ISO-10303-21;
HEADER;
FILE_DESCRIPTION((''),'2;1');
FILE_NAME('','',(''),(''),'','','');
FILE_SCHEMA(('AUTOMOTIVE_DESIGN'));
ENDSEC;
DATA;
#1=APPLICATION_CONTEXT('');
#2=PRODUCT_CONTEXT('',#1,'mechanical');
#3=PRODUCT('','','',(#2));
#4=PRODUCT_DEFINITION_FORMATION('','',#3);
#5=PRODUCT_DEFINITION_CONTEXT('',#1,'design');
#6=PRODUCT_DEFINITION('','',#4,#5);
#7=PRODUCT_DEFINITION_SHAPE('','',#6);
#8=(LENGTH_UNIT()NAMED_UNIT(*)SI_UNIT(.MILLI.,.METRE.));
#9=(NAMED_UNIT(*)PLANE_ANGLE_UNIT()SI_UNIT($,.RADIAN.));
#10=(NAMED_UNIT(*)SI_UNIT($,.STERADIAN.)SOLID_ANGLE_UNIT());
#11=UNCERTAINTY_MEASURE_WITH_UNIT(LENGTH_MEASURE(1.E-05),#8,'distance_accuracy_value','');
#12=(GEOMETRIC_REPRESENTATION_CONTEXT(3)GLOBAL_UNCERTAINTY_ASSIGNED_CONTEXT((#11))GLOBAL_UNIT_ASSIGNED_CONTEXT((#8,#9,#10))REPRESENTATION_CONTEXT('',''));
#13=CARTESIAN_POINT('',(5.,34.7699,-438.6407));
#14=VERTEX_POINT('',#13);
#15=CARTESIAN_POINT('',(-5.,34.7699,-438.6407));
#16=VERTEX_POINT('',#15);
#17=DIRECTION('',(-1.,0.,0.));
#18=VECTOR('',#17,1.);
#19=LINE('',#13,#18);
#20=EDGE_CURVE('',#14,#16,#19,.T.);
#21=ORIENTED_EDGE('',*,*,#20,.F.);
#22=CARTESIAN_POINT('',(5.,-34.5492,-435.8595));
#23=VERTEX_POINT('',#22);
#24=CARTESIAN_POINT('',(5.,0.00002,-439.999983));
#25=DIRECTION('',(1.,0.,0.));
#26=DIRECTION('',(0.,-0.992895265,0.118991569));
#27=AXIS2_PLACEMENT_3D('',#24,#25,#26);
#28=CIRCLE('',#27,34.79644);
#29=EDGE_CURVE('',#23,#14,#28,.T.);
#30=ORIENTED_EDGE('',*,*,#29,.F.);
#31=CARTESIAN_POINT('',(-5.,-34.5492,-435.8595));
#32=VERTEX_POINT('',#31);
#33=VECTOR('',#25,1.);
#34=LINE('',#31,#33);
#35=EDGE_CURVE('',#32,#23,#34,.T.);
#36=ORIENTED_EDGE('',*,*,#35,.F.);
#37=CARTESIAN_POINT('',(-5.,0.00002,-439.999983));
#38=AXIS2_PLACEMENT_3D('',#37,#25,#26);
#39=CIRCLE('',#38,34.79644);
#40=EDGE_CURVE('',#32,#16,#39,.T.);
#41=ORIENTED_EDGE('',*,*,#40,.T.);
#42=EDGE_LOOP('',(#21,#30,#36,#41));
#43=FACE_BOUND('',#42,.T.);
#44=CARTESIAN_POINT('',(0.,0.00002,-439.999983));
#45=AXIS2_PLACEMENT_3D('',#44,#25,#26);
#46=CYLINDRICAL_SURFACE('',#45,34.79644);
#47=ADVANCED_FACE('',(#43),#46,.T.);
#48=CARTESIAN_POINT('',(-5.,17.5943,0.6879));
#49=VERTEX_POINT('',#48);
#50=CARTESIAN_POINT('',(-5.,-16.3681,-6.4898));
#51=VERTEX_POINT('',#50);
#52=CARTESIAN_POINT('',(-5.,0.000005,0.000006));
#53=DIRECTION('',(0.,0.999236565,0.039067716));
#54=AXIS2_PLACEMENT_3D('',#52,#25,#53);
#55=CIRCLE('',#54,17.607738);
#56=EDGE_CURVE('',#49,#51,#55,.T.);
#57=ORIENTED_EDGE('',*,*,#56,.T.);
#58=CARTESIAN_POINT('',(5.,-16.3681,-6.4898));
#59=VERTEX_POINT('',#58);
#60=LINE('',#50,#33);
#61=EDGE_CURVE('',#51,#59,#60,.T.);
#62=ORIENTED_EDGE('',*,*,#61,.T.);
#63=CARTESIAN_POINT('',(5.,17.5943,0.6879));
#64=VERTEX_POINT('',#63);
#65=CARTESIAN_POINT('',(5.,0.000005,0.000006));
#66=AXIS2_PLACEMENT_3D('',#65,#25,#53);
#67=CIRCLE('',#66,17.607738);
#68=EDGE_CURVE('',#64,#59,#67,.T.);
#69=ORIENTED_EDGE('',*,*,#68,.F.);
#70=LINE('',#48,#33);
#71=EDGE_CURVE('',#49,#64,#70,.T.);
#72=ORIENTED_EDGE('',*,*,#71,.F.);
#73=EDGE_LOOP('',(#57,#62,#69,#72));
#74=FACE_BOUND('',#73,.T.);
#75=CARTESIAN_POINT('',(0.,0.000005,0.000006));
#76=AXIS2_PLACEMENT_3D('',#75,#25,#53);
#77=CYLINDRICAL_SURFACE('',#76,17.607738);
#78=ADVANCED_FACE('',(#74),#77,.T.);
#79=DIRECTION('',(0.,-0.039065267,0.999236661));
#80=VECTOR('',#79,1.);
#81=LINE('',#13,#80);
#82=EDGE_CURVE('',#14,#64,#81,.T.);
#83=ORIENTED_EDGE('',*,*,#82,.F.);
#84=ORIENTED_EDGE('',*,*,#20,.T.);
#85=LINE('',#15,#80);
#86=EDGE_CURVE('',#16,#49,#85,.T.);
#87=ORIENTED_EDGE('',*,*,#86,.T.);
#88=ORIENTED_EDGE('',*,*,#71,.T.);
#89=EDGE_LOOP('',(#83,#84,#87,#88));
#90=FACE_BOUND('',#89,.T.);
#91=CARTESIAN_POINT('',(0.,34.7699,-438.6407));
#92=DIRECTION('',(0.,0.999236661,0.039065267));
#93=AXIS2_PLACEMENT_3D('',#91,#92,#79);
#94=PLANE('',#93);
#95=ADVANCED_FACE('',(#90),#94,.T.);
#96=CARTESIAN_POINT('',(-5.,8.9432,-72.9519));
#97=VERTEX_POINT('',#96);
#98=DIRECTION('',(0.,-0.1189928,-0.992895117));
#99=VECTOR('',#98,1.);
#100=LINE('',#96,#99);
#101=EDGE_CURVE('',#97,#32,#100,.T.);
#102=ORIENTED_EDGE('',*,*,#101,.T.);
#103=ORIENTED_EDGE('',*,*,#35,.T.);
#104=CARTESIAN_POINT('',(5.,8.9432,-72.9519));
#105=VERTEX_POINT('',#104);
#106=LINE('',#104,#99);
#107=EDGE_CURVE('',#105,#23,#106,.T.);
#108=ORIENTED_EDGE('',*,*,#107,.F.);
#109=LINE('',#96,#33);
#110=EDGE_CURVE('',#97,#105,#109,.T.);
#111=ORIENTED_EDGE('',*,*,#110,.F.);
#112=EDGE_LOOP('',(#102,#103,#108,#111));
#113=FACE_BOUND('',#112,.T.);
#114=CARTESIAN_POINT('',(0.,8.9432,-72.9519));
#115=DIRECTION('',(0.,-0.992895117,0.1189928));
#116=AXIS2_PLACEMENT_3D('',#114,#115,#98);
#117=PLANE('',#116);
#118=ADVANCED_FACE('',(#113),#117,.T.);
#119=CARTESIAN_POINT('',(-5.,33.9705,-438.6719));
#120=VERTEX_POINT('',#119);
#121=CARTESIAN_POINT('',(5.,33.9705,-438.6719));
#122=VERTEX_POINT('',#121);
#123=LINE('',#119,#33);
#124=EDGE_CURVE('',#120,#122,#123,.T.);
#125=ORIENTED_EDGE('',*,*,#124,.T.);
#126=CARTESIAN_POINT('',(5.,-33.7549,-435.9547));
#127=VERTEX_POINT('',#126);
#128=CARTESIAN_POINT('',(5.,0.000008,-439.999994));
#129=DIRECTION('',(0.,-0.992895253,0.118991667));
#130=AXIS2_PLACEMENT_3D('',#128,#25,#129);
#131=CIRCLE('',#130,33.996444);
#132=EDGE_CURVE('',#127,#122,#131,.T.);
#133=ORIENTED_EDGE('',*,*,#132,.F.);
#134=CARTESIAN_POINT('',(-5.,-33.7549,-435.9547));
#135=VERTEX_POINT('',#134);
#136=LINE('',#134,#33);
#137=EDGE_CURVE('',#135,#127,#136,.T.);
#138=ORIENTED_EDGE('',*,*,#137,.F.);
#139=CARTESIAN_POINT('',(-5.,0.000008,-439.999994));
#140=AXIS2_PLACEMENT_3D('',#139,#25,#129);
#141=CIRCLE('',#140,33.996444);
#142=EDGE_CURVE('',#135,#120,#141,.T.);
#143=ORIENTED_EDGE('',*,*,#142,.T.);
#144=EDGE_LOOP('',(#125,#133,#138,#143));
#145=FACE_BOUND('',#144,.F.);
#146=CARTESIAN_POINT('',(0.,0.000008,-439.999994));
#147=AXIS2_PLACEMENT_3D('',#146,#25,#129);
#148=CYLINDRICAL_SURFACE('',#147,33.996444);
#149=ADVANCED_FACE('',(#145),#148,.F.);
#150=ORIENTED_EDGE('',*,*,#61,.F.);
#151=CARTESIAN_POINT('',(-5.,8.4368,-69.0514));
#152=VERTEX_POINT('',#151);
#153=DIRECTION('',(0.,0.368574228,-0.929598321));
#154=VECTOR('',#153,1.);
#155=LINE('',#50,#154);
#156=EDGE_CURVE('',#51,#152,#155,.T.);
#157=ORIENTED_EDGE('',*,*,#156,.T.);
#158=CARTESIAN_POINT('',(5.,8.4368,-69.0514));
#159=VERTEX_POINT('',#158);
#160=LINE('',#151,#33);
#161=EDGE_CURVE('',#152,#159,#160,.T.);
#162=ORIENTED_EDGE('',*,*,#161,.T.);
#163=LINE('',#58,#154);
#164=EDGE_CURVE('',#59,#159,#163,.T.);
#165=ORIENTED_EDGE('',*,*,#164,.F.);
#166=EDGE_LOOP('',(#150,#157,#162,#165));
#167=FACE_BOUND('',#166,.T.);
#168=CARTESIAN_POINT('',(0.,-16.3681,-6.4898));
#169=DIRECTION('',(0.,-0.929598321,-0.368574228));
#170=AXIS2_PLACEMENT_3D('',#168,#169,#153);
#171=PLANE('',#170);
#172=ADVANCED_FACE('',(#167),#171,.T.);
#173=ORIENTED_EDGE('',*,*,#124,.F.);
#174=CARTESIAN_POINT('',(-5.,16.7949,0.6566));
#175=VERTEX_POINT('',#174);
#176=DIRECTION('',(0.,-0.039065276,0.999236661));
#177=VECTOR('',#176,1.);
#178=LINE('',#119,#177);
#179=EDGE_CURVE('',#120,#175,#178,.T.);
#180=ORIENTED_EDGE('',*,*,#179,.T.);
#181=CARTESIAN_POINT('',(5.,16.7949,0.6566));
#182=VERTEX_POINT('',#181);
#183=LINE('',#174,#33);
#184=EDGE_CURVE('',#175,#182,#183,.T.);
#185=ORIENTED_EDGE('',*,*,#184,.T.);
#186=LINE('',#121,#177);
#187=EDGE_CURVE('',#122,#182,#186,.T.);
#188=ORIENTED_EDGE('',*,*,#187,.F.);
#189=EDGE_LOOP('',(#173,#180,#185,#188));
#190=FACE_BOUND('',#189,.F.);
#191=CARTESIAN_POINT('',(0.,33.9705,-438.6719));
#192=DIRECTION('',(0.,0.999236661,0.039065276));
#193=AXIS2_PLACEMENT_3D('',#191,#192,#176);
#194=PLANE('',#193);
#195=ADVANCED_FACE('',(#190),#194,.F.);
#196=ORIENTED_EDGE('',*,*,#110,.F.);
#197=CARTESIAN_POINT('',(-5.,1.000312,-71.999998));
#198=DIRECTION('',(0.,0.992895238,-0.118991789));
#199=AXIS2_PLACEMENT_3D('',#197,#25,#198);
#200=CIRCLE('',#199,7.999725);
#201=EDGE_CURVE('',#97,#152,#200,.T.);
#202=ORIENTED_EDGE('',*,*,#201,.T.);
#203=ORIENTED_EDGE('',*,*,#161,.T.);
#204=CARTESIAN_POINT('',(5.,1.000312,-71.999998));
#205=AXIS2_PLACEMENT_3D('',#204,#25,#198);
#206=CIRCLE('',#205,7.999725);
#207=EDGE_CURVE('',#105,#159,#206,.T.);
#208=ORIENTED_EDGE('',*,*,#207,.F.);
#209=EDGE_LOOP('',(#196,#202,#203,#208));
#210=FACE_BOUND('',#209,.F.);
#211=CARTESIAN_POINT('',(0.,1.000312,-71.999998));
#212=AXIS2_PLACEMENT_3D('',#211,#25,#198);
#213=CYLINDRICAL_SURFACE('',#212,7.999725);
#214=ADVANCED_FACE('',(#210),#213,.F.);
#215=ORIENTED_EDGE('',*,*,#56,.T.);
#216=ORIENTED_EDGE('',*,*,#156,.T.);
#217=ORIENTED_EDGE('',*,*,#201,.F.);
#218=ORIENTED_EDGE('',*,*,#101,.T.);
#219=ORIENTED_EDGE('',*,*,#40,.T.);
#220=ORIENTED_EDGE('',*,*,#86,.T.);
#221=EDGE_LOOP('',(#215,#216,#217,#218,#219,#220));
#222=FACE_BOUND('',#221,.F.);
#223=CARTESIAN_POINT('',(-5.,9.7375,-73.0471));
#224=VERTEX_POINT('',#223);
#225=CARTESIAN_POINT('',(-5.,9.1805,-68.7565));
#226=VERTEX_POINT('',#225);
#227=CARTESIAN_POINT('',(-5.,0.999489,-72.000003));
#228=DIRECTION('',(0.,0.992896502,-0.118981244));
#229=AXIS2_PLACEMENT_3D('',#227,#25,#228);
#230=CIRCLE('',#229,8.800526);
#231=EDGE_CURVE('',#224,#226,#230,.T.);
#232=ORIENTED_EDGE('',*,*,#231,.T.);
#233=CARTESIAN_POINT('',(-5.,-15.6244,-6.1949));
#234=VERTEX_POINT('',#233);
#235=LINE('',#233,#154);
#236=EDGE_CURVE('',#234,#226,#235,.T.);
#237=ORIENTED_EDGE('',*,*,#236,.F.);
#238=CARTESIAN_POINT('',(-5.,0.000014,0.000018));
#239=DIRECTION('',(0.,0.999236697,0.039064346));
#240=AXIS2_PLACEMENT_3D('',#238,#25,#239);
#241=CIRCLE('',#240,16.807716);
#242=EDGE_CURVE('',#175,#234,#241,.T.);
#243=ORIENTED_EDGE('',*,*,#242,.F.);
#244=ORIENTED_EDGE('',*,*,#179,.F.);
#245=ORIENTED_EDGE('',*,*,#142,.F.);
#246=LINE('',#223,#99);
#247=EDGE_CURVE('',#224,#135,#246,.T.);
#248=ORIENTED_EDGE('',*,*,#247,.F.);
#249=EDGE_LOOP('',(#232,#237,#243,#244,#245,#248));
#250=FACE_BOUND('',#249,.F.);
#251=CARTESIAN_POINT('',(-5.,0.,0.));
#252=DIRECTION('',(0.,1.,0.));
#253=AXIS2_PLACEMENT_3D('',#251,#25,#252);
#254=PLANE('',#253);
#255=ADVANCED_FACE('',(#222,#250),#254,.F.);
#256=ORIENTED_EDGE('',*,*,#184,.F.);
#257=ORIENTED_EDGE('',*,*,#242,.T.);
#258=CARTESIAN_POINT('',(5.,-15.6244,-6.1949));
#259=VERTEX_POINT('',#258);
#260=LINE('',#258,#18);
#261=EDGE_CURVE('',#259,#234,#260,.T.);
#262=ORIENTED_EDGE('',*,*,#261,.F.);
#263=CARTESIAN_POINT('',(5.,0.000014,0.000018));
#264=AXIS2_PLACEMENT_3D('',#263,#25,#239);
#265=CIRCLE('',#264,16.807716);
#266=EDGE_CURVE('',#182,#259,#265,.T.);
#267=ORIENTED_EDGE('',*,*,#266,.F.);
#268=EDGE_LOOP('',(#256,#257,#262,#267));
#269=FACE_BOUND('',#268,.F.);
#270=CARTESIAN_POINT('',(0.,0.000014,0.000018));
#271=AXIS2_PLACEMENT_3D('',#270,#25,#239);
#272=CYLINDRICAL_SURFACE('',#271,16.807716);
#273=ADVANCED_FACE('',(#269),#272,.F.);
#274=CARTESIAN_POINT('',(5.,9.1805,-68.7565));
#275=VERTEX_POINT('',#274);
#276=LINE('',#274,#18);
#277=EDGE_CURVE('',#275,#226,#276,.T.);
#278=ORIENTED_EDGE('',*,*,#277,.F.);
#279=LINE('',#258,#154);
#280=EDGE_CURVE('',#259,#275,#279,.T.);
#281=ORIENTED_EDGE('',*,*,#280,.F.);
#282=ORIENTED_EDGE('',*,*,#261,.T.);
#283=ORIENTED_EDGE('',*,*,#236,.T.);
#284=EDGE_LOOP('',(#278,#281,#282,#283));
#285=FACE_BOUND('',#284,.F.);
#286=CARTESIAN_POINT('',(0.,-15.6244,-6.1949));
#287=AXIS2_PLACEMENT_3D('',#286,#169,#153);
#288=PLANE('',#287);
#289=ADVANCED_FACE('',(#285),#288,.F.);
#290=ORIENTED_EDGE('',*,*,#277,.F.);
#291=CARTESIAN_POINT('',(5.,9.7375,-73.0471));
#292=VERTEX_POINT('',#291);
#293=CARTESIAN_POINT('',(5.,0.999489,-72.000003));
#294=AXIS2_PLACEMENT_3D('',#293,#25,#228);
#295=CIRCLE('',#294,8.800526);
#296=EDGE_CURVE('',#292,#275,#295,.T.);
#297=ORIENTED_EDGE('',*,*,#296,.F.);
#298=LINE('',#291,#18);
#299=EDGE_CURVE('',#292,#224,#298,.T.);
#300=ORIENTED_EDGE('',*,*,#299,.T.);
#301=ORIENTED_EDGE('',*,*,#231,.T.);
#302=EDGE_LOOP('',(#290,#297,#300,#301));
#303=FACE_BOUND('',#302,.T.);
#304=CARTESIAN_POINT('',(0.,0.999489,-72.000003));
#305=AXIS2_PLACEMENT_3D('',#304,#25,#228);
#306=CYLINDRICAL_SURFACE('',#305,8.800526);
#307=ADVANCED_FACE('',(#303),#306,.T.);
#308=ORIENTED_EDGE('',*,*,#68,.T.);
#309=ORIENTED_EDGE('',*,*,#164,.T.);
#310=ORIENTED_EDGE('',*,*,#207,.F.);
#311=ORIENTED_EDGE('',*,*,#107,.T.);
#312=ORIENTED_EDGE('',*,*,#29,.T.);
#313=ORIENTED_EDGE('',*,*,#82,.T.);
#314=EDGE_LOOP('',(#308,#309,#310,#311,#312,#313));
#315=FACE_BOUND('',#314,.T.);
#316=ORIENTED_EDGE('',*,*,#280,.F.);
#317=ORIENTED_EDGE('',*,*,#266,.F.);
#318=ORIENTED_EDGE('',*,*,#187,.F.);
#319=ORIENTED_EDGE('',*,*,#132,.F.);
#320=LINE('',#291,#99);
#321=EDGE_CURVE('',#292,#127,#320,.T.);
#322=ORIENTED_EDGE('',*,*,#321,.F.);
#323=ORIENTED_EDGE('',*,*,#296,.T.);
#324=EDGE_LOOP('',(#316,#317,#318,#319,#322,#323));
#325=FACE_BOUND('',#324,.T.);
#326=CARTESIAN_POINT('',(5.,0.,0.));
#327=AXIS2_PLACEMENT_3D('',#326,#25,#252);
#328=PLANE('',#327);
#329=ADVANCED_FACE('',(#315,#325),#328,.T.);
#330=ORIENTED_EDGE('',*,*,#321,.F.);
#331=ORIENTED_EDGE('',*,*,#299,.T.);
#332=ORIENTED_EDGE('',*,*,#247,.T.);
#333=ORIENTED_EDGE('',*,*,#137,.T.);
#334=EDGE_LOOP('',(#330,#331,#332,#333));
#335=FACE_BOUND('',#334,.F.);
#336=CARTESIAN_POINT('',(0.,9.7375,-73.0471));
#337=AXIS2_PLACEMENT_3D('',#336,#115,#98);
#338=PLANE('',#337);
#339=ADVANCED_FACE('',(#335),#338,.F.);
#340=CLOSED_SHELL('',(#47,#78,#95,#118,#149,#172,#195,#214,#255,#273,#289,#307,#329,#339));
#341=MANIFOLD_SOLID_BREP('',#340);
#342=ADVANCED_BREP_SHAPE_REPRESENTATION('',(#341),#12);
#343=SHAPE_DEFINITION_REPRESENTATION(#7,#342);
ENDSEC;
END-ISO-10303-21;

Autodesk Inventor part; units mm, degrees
ref_plane "YZ Plane" through (0, 0, 0) normal (1, 0, 0) x (0, 1, 0)
ref_plane "XZ Plane" through (0, 0, 0) normal (0, 1, 0) x (-1, 0, 0)
ref_plane "XY Plane" through (0, 0, 0) normal (0, 0, 1) x (1, 0, 0)
sketch "スケッチ1" plane through (0, 0, 0) normal (1, 0, 0) x (0, 1, 0)
  arc A0 (17.1756, 0.6715) -> (-15.9786, -6.3353) centre (0, 0) ccw
  arc A1 (-34.1332, -435.9093) -> (34.3512, -438.657) centre (0, -440) ccw
  arc A2 (9.3592, -73.0018) -> (8.8263, -68.897) centre (1, -72) ccw
  line L0 (8.8263, -68.897) -> (-15.9786, -6.3353)
  line L1 (34.3512, -438.657) -> (17.1756, 0.6715)
  line L2 (9.3592, -73.0018) -> (-34.1332, -435.9093)
  arc A3 (17.5943, 0.6879) -> (-16.3681, -6.4898) centre (0, 0) ccw
  line L3 (-16.3681, -6.4898) -> (8.4368, -69.0514)
  arc A4 (8.9432, -72.9519) -> (8.4368, -69.0514) centre (1, -72) ccw
  line L4 (8.9432, -72.9519) -> (-34.5492, -435.8595)
  arc A5 (-34.5492, -435.8595) -> (34.7699, -438.6407) centre (0, -440) ccw
  line L5 (34.7699, -438.6407) -> (17.5943, 0.6879)
  arc A6 (16.7949, 0.6566) -> (-15.6244, -6.1949) centre (0, 0) ccw
  line L6 (-15.6244, -6.1949) -> (9.1805, -68.7565)
  arc A7 (9.7375, -73.0471) -> (9.1805, -68.7565) centre (1, -72) ccw
  line L7 (9.7375, -73.0471) -> (-33.7549, -435.9547)
  arc A8 (-33.7549, -435.9547) -> (33.9705, -438.6719) centre (0, -440) ccw
  line L8 (33.9705, -438.6719) -> (16.7949, 0.6566)
  dimension "d0" = 34.3775
  dimension "d1" = 68.7549
  dimension "d2" = 440
  dimension "d24" = 0.419
  dimension "d25" = 8
  dimension "d26" = 72
  dimension "d27" = 0.8
  dimension "d32" = 1
extrude "押し出し1" add sketch "スケッチ1" along normal mid plane 10 contours L1 A1 L2 A2 L0 A0 | L5 A5 L4 A4 L3 A3
properties part number "belt_2" material "ゴム"
